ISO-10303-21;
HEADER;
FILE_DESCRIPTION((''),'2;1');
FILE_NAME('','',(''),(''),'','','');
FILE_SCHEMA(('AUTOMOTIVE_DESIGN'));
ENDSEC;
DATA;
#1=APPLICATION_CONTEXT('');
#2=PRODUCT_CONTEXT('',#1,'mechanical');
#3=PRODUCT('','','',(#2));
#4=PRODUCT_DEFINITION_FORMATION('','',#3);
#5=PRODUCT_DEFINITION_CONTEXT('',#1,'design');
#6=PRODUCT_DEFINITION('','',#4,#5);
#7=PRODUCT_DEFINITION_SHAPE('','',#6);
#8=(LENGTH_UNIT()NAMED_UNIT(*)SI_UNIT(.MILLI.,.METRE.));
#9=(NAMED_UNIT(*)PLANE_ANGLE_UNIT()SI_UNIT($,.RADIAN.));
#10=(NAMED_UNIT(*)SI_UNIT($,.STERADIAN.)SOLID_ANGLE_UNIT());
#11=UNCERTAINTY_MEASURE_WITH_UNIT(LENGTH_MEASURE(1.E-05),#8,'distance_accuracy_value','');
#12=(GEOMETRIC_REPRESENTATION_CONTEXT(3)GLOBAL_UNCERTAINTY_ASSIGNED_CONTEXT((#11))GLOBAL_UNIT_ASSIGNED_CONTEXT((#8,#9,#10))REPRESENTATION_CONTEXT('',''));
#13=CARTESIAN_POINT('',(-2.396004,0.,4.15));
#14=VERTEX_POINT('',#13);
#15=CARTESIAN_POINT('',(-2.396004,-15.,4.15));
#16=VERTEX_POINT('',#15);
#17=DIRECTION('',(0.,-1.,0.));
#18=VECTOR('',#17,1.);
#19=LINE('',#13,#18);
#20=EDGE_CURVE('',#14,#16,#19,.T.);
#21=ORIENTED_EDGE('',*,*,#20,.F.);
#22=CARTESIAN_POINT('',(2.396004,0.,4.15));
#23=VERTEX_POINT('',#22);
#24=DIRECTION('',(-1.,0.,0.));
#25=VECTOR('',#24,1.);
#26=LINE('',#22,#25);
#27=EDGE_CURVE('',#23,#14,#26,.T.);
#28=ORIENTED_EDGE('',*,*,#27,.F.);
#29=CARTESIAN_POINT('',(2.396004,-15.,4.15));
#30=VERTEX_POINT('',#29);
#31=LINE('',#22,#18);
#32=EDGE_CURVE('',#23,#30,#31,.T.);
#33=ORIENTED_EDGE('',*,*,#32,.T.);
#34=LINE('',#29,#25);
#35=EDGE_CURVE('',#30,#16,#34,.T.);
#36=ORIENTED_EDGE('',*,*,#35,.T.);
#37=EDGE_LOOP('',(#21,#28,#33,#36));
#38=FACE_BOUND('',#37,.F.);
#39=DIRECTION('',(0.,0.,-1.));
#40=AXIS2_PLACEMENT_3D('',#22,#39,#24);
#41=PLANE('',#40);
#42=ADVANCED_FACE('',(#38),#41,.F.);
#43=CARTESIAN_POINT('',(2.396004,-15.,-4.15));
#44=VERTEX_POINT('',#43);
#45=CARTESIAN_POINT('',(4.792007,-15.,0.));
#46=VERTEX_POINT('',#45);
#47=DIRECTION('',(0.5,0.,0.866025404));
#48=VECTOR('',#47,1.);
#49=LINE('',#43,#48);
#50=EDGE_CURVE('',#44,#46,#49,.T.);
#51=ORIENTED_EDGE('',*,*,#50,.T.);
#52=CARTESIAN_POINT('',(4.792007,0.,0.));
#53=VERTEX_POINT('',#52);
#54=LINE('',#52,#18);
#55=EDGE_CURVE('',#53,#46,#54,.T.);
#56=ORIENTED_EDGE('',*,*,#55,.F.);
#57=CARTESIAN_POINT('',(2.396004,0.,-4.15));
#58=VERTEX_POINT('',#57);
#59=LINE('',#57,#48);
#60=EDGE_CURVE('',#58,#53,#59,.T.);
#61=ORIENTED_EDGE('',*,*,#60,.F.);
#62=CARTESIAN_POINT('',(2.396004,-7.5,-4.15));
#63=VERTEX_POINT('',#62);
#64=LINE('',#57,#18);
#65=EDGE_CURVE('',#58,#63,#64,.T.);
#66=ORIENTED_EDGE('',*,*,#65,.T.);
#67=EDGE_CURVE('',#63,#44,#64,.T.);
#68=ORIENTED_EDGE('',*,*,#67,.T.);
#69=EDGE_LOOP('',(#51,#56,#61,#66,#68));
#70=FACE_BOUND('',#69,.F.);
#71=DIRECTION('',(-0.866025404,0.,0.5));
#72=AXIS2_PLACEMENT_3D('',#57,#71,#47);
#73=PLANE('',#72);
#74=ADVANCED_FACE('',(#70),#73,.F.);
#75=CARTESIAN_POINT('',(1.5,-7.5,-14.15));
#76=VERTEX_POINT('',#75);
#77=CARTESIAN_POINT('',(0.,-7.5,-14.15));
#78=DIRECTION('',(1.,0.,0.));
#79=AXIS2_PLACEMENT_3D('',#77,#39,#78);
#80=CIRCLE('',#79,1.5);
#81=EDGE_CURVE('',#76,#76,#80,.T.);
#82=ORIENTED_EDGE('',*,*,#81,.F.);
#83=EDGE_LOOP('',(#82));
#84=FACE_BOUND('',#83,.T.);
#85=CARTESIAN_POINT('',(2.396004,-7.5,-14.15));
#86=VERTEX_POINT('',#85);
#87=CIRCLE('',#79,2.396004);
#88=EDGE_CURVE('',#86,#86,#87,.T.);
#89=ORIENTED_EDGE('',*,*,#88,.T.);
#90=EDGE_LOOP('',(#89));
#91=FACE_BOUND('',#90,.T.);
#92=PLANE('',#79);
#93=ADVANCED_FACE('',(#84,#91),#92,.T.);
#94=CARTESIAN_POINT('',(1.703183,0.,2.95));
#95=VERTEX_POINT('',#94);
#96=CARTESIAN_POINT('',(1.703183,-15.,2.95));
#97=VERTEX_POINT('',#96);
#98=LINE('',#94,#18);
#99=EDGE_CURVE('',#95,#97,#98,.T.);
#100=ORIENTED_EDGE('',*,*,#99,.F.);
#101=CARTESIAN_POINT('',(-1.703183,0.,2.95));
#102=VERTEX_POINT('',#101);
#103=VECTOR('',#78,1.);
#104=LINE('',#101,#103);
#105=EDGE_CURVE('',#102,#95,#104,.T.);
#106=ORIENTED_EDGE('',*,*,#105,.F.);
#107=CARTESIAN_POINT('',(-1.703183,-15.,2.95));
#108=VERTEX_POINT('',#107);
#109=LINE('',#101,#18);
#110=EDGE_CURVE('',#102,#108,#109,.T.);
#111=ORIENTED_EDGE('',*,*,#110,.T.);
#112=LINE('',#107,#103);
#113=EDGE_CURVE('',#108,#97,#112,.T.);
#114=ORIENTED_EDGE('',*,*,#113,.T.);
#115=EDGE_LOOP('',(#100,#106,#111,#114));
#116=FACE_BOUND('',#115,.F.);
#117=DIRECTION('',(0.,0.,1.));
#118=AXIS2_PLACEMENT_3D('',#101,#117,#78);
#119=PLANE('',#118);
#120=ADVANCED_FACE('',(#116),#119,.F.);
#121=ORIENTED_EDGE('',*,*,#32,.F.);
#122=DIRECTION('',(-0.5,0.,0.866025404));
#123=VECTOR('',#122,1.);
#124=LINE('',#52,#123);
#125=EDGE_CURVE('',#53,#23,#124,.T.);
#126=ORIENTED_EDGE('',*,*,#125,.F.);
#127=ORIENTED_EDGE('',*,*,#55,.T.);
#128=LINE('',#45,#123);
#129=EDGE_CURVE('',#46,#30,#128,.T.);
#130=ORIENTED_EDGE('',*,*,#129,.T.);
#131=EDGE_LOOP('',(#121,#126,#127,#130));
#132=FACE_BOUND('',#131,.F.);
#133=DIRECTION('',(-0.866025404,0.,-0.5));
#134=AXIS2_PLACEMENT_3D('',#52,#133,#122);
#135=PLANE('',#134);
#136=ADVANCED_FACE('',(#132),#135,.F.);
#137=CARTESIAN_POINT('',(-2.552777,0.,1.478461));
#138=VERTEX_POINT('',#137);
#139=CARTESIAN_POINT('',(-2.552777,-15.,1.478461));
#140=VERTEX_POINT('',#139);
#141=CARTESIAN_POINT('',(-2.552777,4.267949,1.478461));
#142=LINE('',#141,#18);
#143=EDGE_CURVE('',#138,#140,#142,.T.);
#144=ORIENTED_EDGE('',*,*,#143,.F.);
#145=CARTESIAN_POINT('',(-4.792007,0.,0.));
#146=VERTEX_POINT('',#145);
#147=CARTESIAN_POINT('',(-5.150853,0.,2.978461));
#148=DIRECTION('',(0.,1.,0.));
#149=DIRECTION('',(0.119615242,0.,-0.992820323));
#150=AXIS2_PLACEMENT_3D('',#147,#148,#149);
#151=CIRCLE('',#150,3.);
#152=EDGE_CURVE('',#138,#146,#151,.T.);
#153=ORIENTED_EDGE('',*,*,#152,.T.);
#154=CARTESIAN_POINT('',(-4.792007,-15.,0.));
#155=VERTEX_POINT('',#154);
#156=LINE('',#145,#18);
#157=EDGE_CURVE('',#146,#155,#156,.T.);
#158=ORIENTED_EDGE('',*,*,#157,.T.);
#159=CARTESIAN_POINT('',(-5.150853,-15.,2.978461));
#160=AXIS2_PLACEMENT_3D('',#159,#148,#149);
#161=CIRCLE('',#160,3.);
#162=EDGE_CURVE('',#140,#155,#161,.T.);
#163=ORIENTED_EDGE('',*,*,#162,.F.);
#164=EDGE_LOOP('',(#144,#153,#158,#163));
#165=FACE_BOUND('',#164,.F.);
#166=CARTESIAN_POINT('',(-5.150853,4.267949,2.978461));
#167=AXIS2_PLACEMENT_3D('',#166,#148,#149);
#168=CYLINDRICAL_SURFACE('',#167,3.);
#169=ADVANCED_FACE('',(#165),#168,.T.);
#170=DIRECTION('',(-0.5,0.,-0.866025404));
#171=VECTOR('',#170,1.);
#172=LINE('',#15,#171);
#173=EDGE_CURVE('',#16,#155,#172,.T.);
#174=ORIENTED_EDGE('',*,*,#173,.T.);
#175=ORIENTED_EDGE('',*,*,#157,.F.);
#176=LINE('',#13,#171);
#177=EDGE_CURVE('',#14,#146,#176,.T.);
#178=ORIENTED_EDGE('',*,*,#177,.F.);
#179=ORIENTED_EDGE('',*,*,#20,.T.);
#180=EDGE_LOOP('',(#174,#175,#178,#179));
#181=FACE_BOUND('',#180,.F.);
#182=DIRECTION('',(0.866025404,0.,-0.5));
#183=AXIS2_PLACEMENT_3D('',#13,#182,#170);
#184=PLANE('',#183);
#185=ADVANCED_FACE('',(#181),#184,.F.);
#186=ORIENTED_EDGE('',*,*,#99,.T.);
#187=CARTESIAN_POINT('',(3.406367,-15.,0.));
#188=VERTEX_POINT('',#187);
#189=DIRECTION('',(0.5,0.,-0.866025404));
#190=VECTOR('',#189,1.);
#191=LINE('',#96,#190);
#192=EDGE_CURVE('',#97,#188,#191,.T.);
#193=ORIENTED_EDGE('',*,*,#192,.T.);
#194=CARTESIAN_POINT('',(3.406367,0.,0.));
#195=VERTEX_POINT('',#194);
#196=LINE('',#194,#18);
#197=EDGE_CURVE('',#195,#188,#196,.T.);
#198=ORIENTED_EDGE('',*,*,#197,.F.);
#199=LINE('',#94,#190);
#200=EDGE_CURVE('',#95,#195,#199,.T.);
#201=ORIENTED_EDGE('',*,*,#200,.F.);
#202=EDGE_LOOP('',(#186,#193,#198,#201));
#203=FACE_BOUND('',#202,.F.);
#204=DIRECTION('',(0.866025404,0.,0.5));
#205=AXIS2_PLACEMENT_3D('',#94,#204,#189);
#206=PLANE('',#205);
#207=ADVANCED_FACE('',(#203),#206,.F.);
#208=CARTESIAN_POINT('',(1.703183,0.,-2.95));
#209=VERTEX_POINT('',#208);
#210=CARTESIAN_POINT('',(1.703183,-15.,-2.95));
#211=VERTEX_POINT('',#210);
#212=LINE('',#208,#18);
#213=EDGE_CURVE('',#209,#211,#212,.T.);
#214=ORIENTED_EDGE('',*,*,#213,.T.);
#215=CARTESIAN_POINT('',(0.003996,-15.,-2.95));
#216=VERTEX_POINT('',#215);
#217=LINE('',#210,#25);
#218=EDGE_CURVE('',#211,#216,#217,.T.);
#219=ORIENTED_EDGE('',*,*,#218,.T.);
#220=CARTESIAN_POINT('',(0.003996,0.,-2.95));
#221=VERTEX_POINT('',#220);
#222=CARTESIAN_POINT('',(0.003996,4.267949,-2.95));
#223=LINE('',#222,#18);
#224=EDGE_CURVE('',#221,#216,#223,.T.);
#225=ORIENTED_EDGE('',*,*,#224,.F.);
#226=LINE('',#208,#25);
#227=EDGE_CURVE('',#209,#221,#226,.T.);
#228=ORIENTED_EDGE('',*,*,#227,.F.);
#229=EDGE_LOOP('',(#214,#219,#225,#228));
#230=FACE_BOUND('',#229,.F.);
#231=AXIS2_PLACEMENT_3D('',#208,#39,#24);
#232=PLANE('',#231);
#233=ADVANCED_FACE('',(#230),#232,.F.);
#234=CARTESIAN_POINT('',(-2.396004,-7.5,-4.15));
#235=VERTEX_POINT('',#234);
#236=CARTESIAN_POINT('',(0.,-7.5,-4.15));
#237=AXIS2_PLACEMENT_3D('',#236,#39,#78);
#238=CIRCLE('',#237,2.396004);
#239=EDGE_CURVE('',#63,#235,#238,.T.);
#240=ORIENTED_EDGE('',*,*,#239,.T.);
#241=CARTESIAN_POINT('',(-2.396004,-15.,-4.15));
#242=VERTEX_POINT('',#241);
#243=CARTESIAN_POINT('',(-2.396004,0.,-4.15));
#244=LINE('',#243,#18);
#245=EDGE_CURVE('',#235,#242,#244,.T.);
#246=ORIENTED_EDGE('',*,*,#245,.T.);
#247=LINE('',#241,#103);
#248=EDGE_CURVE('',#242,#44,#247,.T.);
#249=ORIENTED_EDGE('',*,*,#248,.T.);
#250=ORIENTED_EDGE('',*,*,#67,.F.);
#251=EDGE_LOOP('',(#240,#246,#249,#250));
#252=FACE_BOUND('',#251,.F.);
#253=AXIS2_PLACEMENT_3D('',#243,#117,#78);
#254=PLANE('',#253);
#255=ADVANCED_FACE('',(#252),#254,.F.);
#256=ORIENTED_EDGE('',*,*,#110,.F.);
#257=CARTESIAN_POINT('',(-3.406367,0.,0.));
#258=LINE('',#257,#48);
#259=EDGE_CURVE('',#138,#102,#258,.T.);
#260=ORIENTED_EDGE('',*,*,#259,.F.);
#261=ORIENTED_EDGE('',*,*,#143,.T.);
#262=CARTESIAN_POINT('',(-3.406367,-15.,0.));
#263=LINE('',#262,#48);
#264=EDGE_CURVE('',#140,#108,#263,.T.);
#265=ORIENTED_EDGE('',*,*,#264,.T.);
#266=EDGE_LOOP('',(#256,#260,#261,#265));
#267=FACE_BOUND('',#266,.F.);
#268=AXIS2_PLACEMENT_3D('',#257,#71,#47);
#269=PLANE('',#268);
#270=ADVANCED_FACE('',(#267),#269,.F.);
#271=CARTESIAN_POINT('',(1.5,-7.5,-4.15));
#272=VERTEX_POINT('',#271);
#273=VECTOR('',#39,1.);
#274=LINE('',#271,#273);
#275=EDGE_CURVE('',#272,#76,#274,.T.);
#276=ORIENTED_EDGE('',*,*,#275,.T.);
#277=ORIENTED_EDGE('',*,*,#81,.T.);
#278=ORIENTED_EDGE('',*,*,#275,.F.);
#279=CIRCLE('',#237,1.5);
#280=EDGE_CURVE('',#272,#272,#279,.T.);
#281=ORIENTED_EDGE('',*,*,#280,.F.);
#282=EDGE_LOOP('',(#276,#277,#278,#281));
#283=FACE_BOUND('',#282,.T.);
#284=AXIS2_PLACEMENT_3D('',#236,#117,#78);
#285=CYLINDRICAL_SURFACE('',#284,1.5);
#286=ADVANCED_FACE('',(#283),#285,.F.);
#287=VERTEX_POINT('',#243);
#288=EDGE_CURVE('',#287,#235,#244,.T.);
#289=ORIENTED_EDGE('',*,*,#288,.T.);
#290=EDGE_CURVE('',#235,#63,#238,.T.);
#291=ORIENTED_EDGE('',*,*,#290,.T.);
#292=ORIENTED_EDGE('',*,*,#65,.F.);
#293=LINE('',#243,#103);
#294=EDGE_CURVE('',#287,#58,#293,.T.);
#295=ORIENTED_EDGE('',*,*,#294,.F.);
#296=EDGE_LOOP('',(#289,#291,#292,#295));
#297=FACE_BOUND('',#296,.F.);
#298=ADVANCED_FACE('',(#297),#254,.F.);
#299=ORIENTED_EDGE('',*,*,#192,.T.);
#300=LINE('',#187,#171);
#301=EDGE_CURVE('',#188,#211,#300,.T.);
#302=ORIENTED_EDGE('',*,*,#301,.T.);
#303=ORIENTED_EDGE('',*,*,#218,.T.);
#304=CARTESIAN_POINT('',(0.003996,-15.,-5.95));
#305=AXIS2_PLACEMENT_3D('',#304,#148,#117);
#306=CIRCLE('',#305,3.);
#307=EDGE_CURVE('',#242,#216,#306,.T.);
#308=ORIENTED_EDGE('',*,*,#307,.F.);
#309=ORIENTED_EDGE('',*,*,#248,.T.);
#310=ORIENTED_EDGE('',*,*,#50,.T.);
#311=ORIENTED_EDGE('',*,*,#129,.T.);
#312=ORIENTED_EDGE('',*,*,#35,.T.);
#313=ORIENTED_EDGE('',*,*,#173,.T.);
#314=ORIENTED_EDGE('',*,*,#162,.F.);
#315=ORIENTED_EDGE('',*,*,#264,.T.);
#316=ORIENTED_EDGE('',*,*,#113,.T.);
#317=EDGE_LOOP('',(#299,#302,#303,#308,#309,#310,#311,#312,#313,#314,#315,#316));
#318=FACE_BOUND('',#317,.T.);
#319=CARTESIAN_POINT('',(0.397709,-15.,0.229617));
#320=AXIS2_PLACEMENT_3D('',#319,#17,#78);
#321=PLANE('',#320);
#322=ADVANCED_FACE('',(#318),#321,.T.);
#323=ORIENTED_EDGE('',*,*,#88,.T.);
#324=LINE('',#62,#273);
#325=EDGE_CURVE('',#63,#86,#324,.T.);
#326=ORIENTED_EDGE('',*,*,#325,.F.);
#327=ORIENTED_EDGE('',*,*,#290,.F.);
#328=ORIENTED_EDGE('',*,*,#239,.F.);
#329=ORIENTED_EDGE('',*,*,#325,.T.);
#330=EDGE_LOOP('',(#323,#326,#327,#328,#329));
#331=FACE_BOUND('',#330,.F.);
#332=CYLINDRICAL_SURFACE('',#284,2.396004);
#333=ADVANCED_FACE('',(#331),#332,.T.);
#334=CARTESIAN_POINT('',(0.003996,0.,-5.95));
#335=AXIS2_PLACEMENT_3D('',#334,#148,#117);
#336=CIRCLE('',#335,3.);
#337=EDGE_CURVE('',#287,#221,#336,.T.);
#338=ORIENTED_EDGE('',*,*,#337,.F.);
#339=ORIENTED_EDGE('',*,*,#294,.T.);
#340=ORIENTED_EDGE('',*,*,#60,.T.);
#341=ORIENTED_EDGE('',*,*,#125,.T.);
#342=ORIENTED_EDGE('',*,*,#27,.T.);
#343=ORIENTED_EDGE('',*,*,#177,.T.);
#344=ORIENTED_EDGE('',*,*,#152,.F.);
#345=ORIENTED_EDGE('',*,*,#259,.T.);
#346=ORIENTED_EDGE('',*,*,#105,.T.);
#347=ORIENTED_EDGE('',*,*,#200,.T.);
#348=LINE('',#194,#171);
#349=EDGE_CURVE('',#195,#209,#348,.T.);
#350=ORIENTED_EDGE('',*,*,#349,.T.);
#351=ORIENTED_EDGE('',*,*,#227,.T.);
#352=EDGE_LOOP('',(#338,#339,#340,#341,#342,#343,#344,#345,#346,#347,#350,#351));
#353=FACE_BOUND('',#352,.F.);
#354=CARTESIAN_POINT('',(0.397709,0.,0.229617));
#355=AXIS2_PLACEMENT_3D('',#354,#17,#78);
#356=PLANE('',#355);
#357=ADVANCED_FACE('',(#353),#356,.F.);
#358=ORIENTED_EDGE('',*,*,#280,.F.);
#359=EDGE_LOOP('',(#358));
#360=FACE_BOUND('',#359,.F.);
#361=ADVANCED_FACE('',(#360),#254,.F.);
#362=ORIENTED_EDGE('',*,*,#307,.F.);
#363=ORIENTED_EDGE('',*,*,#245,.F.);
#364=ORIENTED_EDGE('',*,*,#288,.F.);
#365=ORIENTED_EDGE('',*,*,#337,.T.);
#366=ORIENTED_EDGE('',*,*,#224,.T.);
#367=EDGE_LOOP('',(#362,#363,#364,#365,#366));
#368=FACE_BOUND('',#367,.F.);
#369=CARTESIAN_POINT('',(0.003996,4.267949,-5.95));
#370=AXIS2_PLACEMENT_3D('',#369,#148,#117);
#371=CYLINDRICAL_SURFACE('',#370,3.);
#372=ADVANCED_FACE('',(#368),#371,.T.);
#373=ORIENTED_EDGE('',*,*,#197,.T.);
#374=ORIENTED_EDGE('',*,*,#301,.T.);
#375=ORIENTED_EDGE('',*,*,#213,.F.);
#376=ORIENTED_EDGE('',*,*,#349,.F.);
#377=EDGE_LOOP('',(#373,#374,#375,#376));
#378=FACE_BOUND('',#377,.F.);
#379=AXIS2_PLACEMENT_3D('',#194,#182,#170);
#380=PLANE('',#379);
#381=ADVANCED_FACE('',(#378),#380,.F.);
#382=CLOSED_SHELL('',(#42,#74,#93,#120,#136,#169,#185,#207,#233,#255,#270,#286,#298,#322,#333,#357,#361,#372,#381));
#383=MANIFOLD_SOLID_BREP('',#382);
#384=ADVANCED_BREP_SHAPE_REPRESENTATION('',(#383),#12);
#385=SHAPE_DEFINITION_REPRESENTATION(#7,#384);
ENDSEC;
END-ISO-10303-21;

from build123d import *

# Parameters (mm, degrees)
F1_DEPTH    = 15
F2_T1_DEPTH = 23.5358983849
F3_R        = 1.5
F4_DEPTH    = 10


# Not quite as in the source:
# - a fillet or chamfer that OpenCascade refuses, or shapes differently, is made with other operations: its cross-section is extruded or revolved along the edge and cut away or added


with BuildPart() as f1:
    # F0 (on Front) → F1 (new body)
    with BuildSketch(Plane.XZ):
        Polygon((-3.4063665882, 0), (-1.7031832941, 2.95), (1.7031832941, 2.95), (3.4063665882, 0), (1.7031832941, -2.95), (-1.7031832941, -2.95), (-2.3960036171, -4.15), (2.3960036171, -4.15), (4.7920072343, 0), (2.3960036171, 4.15), (-2.3960036171, 4.15), (-4.7920072343, 0), align=None)
    extrude(amount=F1_DEPTH)

    # F2: fillet of radius 3 on 2 edges, made by hand

    # F2_s2 → F2_t1 (cut)
    with BuildSketch(Plane.XZ.offset(-4.2679491924)):
        with BuildLine():
            ThreePointArc((-4.7920072343, 0), (-3.4978833466, 0.4749251787), (-2.5527767497, 1.4784609691))
            Line((-2.5527767497, 1.4784609691), (-3.4063665882, 0))
            Line((-3.4063665882, 0), (-4.7920072343, 0))
        make_face()
        with BuildLine():
            ThreePointArc((0.0039963829, -2.95), (-1.3376444036, -3.266718427), (-2.3960036171, -4.15))
            Line((-2.3960036171, -4.15), (-1.7031832941, -2.95))
            Line((-1.7031832941, -2.95), (0.0039963829, -2.95))
        make_face()
    extrude(amount=F2_T1_DEPTH, mode=Mode.SUBTRACT)

    # F3 (on face) → F4 (join)
    with BuildSketch(Plane(origin=(0, 0, -4.15), x_dir=(1, 0, 0), z_dir=(0, 0, -1))):
        with BuildLine():
            ThreePointArc((-2.3960036171, 7.5), (0, 5.1039963829), (2.3960036171, 7.5))
            ThreePointArc((2.3960036171, 7.5), (0, 9.8960036171), (-2.3960036171, 7.5))
        make_face()
        with Locations((0, 7.5)):
            Circle(F3_R, mode=Mode.SUBTRACT)
    extrude(amount=F4_DEPTH)


solid = f1.part
